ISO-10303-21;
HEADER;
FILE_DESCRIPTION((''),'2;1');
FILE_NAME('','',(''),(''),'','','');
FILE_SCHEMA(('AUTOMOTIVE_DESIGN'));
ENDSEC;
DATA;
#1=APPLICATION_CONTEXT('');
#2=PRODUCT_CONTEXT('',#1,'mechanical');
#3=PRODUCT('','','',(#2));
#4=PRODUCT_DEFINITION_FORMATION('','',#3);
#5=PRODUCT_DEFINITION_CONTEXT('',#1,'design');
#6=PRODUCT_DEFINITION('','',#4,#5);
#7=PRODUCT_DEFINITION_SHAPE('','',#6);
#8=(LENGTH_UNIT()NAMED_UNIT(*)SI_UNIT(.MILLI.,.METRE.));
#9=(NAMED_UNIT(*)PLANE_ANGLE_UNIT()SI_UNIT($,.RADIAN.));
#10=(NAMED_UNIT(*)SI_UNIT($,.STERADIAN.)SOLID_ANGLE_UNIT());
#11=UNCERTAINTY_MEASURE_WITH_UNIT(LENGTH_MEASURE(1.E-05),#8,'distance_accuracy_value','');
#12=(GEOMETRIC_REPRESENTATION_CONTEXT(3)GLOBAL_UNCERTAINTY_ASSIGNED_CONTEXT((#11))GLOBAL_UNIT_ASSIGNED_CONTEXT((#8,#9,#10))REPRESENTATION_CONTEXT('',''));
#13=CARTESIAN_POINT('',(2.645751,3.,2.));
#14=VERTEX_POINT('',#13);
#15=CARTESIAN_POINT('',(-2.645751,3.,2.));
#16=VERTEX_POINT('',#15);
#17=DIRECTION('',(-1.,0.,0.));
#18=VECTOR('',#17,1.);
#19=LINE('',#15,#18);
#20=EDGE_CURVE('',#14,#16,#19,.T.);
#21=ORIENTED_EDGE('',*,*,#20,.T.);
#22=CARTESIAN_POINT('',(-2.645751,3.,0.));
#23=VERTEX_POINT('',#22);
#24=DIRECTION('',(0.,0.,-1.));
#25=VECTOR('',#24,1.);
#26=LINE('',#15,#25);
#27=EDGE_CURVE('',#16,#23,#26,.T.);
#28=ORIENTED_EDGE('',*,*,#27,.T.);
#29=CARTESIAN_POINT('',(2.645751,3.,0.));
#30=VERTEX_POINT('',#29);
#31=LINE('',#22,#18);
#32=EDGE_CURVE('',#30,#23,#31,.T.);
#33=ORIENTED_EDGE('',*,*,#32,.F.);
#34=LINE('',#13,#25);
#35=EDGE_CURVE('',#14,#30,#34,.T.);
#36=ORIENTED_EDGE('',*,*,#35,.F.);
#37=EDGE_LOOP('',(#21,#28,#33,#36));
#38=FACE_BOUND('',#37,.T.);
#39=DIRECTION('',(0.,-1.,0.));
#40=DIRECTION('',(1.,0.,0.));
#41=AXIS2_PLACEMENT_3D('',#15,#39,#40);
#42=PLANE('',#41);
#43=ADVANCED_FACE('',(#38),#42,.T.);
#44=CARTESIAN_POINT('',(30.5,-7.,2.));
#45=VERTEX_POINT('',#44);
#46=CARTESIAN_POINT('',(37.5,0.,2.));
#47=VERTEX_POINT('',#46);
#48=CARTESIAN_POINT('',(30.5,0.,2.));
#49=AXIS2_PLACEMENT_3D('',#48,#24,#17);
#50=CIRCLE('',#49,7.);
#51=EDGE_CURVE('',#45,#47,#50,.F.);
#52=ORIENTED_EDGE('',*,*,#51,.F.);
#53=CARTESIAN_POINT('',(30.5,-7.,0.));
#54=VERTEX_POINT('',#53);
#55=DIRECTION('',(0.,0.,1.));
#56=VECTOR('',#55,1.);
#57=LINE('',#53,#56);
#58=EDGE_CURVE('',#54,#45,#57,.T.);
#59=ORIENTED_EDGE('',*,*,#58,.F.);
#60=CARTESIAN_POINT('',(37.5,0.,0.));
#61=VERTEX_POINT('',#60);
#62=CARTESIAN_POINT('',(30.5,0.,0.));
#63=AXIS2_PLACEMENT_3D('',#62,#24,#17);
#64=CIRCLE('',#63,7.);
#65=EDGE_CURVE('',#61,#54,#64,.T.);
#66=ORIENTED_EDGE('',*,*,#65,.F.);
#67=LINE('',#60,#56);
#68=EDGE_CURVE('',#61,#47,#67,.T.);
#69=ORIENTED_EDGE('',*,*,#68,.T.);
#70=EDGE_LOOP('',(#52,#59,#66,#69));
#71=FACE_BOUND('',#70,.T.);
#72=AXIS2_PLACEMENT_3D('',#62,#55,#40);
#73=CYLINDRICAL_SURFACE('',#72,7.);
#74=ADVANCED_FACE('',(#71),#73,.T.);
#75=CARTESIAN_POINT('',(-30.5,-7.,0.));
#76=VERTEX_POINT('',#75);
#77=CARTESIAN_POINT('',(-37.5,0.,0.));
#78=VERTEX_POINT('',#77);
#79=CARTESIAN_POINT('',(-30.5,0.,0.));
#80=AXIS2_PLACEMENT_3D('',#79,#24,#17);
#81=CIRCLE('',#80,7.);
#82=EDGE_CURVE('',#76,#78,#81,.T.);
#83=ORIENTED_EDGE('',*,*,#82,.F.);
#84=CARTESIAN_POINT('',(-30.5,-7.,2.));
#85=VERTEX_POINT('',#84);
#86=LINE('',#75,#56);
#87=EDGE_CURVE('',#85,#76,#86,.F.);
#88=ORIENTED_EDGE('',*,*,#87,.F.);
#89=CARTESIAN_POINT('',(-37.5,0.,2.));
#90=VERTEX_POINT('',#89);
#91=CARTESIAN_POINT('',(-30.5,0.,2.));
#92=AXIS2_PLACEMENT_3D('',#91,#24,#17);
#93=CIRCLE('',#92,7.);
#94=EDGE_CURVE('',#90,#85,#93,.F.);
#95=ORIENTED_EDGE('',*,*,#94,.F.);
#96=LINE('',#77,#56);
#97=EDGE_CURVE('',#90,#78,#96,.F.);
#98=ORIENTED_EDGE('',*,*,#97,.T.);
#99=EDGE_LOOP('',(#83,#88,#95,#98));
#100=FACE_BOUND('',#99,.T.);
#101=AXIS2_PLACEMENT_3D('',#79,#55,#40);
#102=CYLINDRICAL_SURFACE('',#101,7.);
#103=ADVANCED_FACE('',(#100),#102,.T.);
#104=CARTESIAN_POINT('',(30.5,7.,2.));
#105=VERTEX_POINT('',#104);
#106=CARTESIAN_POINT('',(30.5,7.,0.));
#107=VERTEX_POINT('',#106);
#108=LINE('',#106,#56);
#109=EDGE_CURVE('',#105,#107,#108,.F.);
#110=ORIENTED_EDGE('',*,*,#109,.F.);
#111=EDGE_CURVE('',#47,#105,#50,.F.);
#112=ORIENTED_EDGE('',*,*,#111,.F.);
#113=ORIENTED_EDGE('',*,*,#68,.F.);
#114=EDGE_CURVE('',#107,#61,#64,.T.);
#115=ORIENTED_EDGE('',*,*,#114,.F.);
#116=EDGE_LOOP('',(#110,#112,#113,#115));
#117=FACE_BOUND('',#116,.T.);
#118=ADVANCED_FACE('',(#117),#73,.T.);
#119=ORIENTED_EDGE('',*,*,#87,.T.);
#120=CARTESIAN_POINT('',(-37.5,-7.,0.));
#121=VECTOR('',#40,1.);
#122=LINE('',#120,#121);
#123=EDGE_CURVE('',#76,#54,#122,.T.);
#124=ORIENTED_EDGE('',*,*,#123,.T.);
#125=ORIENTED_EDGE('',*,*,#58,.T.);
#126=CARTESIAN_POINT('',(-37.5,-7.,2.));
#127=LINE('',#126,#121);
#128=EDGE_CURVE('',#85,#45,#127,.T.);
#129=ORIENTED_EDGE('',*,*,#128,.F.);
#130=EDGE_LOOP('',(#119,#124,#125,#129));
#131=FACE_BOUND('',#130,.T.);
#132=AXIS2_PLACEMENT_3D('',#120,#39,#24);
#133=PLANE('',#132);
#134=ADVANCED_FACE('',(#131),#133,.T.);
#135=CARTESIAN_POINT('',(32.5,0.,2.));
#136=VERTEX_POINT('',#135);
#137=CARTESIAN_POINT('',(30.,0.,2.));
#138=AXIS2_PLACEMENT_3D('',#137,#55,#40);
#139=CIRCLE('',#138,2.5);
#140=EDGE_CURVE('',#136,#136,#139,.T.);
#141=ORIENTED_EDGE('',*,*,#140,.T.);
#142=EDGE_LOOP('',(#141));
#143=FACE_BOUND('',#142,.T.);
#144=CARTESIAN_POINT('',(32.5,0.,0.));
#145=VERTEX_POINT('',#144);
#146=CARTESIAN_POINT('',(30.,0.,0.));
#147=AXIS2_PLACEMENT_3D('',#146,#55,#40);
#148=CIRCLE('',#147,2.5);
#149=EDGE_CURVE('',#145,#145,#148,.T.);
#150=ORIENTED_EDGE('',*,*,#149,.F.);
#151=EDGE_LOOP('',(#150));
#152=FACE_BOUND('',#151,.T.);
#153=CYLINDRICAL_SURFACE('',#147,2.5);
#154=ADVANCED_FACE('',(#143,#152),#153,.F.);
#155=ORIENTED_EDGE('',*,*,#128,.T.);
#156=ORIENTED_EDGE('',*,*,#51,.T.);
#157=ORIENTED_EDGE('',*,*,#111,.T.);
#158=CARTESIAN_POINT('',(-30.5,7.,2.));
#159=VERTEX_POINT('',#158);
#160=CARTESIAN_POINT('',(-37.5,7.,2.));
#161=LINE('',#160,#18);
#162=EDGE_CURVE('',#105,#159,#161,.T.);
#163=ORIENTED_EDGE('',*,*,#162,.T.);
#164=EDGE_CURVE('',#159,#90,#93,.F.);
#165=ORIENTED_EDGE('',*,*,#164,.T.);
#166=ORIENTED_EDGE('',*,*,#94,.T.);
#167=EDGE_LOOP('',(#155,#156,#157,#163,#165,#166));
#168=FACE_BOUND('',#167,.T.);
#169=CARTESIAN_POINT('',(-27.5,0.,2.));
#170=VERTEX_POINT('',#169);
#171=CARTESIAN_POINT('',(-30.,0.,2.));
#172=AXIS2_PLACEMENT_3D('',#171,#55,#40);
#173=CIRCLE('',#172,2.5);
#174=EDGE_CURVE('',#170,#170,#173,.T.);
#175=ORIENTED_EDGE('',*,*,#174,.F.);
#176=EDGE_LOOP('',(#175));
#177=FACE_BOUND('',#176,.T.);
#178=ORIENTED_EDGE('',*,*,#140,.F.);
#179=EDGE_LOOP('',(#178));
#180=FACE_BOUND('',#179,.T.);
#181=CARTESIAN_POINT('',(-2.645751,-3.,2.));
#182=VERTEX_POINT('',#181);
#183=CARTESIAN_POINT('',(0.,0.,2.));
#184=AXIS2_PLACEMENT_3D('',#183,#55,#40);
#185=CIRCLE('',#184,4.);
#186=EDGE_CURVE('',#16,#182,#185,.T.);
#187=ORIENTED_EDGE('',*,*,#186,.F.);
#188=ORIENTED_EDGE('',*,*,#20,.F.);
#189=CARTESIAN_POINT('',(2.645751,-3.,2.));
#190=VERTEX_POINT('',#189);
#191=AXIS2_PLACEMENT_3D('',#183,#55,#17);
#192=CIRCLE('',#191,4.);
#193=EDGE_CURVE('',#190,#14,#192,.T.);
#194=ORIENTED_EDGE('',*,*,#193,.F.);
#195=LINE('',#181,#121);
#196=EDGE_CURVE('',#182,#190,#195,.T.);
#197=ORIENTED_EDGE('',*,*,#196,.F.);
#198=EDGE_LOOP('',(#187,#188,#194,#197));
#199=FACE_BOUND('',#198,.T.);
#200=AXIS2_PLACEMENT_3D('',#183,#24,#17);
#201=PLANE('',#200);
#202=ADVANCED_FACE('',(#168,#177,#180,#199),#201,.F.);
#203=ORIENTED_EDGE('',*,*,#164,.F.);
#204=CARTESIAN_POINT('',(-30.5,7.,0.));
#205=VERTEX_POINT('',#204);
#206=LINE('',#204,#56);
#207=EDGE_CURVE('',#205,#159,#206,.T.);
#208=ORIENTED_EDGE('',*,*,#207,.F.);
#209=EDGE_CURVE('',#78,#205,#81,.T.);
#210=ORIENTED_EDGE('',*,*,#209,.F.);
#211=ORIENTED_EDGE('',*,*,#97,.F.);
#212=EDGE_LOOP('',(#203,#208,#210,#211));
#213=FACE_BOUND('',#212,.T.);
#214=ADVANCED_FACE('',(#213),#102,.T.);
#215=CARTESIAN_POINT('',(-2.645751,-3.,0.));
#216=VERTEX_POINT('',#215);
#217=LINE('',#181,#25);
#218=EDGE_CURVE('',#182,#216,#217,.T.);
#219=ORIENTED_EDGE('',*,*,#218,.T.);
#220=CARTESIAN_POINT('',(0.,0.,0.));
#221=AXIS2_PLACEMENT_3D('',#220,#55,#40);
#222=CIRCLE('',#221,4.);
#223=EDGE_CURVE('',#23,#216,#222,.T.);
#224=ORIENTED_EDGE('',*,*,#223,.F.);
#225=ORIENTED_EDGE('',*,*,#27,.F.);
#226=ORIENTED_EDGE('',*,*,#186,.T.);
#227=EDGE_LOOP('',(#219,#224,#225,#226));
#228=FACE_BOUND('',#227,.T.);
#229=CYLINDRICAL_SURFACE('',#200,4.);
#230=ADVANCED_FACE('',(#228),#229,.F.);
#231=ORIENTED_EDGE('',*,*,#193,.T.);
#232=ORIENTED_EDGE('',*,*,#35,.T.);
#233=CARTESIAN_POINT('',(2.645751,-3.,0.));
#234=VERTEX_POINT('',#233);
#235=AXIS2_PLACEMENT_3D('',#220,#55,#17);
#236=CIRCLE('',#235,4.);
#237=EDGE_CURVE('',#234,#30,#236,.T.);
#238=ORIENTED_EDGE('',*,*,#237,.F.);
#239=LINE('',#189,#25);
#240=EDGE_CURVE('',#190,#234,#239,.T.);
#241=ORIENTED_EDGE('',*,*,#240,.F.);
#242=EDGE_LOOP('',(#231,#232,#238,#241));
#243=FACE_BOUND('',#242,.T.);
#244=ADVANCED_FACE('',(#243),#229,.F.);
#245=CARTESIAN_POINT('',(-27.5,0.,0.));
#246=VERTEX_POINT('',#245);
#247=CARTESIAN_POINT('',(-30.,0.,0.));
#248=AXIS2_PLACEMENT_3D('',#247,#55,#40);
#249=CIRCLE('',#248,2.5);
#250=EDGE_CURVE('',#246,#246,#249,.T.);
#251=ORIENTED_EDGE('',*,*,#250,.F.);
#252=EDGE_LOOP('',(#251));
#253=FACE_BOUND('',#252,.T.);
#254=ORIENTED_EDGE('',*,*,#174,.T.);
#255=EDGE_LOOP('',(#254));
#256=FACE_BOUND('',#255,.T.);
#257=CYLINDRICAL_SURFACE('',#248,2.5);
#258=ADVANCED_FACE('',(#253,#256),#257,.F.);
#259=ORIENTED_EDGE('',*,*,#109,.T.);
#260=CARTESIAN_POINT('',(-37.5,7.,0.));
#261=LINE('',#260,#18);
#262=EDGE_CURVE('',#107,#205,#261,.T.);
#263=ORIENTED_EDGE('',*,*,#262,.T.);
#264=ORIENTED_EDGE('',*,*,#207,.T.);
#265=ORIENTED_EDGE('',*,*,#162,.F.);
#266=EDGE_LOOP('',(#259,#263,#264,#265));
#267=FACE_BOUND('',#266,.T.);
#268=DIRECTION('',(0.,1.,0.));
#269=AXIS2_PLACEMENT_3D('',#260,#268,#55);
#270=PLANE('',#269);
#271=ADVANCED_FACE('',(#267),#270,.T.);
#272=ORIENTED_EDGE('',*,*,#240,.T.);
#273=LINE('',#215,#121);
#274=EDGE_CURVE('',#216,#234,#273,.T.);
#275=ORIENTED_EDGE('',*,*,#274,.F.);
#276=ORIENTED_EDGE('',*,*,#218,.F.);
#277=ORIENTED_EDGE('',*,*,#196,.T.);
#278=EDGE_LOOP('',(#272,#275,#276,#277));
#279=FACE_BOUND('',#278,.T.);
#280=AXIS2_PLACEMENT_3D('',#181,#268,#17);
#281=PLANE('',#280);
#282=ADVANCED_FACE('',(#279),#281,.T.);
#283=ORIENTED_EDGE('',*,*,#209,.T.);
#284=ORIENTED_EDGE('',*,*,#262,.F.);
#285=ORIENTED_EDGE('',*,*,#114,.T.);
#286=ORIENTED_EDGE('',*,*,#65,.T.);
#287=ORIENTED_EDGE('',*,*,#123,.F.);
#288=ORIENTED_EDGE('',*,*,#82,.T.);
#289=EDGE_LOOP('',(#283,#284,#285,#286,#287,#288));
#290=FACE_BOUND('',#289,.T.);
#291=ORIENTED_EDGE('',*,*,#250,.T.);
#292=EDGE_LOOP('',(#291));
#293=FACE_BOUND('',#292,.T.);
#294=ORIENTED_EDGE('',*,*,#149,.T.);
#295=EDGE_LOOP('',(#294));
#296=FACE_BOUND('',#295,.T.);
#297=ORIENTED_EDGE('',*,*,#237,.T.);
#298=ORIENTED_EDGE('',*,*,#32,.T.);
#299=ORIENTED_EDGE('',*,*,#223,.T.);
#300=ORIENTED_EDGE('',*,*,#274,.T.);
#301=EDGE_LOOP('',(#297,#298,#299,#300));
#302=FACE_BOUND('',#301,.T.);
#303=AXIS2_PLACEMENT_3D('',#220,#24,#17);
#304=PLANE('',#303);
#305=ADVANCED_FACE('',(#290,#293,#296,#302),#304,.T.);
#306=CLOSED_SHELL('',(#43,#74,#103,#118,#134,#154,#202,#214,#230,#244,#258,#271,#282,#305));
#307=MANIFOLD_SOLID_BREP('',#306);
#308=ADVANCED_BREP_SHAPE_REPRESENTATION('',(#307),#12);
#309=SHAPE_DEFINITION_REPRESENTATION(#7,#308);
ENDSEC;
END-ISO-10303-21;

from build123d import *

# Parameters (mm, degrees)
EXTRUDE_1_DEPTH     = 2
SKETCH_2_W          = 75
SKETCH_2_H          = 14
SKETCH_2_R          = 2.5
EXTRUDE_2_DEPTH     = 2
CUT_EXTRUDE_2_DEPTH = 39.20013089
FILLET_1_R          = 7


with BuildPart() as part:
    # 草图1 → 凸台-拉伸1 (new body)
    with BuildSketch(Plane.XY):
        with BuildLine():
            Line((-2.645751311, 3), (2.645751311, 3))
            ThreePointArc((2.645751311, 3), (4, 0), (2.645751311, -3))
            Line((2.645751311, -3), (-2.645751311, -3))
            ThreePointArc((-2.645751311, -3), (-4, 0), (-2.645751311, 3))
        make_face()
    extrude(amount=EXTRUDE_1_DEPTH)

    # 草图2 → 凸台-拉伸2 (add)
    with BuildSketch(Plane.XY.offset(2)):
        Rectangle(SKETCH_2_W, SKETCH_2_H)
        with Locations((-30, 0)):
            Circle(SKETCH_2_R, mode=Mode.SUBTRACT)
        with Locations((30, 0)):
            Circle(SKETCH_2_R, mode=Mode.SUBTRACT)
    extrude(amount=-EXTRUDE_2_DEPTH)

    # 草图3 → 切除-拉伸2 (cut, through all)
    with BuildSketch(Plane.XY):
        with BuildLine():
            Line((-2.645751311, 3), (2.645751311, 3))
            ThreePointArc((2.645751311, 3), (4, 0), (2.645751311, -3))
            Line((2.645751311, -3), (-2.645751311, -3))
            ThreePointArc((-2.645751311, -3), (-4, 0), (-2.645751311, 3))
        make_face()
    extrude(amount=CUT_EXTRUDE_2_DEPTH, mode=Mode.SUBTRACT)

    # 圆角1
    fillet_1_edges = [part.edges().sort_by_distance(p)[0] for p in [
        (37.5, -7, 1),
        (37.5, 7, 1),
        (-37.5, -7, 1),
        (-37.5, 7, 1),
    ]]
    fillet(fillet_1_edges, radius=FILLET_1_R - 0.0001)  # a hair under: the kernel refuses the full size


solid = part.part
